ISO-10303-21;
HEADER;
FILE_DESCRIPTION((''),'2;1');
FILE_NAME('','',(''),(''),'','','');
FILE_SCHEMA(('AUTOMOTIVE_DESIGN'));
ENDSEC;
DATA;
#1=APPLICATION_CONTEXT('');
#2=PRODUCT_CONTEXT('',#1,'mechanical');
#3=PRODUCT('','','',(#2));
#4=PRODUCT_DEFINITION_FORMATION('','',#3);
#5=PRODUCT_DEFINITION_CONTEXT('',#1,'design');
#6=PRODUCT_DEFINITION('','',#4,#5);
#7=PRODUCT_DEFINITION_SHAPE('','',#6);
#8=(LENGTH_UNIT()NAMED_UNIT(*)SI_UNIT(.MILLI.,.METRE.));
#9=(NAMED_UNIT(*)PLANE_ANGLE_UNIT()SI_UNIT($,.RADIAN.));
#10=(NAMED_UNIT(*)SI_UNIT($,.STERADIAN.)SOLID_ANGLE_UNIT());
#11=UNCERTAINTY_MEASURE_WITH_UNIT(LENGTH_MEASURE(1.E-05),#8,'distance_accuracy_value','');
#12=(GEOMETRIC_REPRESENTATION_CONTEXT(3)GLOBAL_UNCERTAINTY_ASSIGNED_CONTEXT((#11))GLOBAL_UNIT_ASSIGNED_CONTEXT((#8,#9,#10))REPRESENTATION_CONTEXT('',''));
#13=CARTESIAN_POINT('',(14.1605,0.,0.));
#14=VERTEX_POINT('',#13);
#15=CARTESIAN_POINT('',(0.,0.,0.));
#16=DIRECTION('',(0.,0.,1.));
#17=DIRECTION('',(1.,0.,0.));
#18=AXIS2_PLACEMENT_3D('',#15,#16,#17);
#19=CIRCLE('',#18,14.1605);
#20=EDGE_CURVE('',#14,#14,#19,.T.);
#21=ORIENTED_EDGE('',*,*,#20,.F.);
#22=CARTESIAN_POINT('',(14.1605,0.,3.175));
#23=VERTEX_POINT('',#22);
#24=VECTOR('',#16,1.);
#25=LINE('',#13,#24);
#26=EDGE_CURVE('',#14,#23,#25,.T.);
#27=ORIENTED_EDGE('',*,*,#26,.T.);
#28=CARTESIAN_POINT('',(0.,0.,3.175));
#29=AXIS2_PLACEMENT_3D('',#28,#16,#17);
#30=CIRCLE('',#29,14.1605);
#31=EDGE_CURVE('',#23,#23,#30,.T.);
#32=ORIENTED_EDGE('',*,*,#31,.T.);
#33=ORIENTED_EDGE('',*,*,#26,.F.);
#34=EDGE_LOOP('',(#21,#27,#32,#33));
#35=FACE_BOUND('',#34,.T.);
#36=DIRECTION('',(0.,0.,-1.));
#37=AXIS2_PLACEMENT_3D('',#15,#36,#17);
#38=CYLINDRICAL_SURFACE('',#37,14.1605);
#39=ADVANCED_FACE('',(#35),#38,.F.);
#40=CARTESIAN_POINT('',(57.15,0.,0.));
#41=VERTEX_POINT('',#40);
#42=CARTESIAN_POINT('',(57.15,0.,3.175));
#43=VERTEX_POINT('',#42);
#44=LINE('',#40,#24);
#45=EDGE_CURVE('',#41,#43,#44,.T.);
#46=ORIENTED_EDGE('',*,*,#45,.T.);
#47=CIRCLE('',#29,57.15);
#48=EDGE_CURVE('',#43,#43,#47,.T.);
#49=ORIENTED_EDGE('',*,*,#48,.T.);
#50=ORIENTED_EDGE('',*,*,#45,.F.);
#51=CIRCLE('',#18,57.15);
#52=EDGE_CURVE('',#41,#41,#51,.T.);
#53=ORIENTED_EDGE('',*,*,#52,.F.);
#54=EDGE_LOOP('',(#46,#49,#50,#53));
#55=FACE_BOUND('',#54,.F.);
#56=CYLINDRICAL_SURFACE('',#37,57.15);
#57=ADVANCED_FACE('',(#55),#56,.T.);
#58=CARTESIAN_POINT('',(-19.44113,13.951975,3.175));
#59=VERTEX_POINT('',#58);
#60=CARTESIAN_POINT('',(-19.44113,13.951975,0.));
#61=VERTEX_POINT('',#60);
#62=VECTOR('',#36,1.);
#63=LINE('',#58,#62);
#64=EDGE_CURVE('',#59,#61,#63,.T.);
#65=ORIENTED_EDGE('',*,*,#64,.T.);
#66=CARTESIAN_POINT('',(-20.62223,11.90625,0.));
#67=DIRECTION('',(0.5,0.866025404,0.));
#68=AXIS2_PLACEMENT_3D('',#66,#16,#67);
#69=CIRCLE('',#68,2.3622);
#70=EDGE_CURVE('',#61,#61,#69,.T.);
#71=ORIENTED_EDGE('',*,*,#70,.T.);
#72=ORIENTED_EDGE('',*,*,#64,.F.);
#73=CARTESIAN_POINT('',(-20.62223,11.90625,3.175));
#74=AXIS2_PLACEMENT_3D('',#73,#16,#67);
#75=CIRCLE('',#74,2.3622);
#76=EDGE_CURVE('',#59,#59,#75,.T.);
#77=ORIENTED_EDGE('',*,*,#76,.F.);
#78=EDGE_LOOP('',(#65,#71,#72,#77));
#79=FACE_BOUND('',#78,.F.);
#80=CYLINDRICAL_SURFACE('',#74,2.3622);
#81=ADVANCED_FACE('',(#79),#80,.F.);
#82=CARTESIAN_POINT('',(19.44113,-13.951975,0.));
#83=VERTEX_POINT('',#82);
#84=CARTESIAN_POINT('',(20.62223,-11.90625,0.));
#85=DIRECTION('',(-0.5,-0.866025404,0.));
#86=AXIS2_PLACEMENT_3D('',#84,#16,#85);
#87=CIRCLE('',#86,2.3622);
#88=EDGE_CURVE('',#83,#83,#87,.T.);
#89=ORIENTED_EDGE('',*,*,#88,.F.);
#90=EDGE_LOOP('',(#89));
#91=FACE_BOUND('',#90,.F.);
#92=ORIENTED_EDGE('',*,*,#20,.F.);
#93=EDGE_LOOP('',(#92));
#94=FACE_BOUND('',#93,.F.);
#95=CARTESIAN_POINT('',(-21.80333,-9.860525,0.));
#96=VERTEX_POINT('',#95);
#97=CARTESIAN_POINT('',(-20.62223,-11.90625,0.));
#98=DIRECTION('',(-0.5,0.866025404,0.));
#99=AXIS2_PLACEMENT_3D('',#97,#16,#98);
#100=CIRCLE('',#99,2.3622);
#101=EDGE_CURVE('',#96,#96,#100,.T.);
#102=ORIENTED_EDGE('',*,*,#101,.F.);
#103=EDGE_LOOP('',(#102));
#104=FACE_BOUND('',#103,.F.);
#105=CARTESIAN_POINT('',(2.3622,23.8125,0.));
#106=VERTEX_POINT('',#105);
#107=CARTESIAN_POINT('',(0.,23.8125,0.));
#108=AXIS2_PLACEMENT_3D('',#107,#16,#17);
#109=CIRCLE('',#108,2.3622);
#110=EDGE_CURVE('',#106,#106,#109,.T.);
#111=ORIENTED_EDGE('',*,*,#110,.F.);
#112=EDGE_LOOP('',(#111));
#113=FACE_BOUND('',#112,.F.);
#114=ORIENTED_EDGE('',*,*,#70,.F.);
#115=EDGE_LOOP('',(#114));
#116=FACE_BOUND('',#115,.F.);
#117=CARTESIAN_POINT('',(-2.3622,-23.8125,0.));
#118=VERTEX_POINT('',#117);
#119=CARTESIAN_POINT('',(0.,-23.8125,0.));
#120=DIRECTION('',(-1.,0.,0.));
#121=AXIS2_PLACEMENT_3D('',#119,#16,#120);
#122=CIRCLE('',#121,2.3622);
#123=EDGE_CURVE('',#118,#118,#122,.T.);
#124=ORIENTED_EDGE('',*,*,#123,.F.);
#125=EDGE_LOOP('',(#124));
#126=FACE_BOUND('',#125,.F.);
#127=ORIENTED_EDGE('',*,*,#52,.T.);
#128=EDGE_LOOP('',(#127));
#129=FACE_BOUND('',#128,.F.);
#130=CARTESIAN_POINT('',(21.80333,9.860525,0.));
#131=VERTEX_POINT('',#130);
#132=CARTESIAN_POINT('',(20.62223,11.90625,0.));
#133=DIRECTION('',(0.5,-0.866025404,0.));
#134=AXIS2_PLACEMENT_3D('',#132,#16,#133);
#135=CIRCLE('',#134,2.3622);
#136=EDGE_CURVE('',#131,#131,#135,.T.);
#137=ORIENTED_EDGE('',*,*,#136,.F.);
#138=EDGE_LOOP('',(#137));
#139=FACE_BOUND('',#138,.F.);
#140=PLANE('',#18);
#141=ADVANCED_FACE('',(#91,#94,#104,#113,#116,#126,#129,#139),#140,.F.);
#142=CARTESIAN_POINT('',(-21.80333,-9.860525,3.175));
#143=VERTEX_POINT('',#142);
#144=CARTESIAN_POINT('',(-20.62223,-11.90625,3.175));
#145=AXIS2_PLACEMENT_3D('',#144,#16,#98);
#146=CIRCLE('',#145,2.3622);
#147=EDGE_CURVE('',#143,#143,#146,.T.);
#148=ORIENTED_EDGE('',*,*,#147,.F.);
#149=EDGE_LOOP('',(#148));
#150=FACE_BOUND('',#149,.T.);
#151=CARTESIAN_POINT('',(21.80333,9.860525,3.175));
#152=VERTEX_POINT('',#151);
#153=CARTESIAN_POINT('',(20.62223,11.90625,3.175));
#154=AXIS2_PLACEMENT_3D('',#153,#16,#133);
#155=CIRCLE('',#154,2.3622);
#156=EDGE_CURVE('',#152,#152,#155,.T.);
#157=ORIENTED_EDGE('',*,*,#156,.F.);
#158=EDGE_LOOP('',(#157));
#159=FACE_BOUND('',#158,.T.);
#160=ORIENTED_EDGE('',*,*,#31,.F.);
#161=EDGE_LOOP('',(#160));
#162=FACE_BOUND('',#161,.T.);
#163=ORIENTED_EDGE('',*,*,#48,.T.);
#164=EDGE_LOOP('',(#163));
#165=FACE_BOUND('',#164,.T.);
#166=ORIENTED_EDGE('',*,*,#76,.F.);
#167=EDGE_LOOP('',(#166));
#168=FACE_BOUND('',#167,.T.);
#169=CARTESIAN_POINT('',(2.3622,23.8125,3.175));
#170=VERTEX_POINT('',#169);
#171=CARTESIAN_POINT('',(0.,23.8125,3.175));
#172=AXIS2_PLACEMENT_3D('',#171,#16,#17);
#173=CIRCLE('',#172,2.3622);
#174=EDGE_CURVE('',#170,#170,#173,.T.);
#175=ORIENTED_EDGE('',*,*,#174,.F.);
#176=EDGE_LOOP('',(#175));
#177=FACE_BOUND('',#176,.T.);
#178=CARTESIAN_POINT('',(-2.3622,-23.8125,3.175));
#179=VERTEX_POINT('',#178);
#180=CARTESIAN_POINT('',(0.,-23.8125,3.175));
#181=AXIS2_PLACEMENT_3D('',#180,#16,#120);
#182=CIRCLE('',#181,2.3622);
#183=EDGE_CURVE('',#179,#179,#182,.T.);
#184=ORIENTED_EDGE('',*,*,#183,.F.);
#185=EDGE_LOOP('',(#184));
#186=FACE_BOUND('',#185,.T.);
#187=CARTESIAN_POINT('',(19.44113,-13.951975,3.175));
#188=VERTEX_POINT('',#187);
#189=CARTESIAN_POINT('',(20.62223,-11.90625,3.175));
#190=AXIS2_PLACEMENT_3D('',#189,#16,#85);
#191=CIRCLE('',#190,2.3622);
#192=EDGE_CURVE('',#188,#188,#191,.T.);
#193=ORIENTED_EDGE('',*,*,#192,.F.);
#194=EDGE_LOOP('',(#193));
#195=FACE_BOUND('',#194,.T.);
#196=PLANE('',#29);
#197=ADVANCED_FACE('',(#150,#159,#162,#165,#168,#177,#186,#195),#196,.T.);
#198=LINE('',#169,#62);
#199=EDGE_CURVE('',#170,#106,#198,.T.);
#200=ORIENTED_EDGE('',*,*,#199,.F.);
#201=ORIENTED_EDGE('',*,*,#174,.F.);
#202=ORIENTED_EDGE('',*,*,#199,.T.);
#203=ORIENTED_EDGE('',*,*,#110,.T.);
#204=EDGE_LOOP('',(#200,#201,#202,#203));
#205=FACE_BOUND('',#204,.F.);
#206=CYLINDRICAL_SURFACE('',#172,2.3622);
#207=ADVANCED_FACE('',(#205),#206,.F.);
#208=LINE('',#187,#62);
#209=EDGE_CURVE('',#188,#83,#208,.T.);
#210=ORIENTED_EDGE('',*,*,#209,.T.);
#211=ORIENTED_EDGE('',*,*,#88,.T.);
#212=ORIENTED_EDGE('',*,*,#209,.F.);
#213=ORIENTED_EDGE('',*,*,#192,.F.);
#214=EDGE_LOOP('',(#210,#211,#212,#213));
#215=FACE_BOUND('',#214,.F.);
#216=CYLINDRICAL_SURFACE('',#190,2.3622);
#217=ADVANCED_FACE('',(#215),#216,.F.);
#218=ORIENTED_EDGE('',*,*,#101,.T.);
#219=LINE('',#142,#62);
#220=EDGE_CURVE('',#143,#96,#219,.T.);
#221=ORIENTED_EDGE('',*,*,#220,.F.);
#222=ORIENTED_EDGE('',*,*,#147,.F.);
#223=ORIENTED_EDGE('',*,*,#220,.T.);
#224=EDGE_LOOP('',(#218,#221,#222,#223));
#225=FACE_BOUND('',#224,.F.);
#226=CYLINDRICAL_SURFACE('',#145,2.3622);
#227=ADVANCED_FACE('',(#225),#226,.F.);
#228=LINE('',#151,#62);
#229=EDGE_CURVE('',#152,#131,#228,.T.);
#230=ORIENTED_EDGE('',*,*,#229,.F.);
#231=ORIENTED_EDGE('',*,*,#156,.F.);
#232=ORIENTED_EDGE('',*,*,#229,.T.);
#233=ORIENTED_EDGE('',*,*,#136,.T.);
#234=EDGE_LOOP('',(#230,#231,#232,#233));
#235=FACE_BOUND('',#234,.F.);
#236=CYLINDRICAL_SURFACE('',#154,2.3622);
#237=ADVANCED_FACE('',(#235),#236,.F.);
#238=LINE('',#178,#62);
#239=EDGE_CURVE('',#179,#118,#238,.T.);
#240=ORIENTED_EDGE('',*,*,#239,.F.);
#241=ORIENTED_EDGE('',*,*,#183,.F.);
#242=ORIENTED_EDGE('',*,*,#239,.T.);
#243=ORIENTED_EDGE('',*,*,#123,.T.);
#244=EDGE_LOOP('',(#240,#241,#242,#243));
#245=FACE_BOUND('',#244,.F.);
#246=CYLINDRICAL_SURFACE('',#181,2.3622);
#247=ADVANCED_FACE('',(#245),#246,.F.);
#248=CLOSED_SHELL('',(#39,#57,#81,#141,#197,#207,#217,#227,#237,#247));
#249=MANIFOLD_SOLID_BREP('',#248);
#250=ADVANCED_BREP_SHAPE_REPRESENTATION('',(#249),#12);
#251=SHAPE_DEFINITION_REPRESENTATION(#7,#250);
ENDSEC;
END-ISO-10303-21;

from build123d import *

# Parameters (mm, degrees)
F0_R            = 57.15
F0_R_2          = 14.1605
F1_DEPTH        = 3.175
F2_R            = 2.3622
F3_DEPTH        = 3.176
F3_COPIES_COUNT = 6


# Not quite as in the source:
# - a pattern or mirror of a feature is missing from the dataset's text; its kind, count and spacing are read off the source's solid


with BuildPart() as f1:
    # F0 (on Top) → F1 (new body)
    with BuildSketch(Plane.XY):
        Circle(F0_R)
        Circle(F0_R_2, mode=Mode.SUBTRACT)
    extrude(amount=F1_DEPTH)

    # F2 (on face) → F3 (cut, through all)
    with BuildSketch(Plane.XY.offset(3.175)):
        with Locations((0, 23.8125)):
            Circle(F2_R)
    f3 = extrude(amount=-F3_DEPTH, mode=Mode.SUBTRACT)

    # F3_copies: F3 ×6 about axis
    f3_copies_axis = Axis((0, 0, 0), (0, 0, 1))
    for i in range(1, F3_COPIES_COUNT):
        add(f3.rotate(f3_copies_axis, i * 360 / F3_COPIES_COUNT), mode=Mode.SUBTRACT)


solid = f1.part
